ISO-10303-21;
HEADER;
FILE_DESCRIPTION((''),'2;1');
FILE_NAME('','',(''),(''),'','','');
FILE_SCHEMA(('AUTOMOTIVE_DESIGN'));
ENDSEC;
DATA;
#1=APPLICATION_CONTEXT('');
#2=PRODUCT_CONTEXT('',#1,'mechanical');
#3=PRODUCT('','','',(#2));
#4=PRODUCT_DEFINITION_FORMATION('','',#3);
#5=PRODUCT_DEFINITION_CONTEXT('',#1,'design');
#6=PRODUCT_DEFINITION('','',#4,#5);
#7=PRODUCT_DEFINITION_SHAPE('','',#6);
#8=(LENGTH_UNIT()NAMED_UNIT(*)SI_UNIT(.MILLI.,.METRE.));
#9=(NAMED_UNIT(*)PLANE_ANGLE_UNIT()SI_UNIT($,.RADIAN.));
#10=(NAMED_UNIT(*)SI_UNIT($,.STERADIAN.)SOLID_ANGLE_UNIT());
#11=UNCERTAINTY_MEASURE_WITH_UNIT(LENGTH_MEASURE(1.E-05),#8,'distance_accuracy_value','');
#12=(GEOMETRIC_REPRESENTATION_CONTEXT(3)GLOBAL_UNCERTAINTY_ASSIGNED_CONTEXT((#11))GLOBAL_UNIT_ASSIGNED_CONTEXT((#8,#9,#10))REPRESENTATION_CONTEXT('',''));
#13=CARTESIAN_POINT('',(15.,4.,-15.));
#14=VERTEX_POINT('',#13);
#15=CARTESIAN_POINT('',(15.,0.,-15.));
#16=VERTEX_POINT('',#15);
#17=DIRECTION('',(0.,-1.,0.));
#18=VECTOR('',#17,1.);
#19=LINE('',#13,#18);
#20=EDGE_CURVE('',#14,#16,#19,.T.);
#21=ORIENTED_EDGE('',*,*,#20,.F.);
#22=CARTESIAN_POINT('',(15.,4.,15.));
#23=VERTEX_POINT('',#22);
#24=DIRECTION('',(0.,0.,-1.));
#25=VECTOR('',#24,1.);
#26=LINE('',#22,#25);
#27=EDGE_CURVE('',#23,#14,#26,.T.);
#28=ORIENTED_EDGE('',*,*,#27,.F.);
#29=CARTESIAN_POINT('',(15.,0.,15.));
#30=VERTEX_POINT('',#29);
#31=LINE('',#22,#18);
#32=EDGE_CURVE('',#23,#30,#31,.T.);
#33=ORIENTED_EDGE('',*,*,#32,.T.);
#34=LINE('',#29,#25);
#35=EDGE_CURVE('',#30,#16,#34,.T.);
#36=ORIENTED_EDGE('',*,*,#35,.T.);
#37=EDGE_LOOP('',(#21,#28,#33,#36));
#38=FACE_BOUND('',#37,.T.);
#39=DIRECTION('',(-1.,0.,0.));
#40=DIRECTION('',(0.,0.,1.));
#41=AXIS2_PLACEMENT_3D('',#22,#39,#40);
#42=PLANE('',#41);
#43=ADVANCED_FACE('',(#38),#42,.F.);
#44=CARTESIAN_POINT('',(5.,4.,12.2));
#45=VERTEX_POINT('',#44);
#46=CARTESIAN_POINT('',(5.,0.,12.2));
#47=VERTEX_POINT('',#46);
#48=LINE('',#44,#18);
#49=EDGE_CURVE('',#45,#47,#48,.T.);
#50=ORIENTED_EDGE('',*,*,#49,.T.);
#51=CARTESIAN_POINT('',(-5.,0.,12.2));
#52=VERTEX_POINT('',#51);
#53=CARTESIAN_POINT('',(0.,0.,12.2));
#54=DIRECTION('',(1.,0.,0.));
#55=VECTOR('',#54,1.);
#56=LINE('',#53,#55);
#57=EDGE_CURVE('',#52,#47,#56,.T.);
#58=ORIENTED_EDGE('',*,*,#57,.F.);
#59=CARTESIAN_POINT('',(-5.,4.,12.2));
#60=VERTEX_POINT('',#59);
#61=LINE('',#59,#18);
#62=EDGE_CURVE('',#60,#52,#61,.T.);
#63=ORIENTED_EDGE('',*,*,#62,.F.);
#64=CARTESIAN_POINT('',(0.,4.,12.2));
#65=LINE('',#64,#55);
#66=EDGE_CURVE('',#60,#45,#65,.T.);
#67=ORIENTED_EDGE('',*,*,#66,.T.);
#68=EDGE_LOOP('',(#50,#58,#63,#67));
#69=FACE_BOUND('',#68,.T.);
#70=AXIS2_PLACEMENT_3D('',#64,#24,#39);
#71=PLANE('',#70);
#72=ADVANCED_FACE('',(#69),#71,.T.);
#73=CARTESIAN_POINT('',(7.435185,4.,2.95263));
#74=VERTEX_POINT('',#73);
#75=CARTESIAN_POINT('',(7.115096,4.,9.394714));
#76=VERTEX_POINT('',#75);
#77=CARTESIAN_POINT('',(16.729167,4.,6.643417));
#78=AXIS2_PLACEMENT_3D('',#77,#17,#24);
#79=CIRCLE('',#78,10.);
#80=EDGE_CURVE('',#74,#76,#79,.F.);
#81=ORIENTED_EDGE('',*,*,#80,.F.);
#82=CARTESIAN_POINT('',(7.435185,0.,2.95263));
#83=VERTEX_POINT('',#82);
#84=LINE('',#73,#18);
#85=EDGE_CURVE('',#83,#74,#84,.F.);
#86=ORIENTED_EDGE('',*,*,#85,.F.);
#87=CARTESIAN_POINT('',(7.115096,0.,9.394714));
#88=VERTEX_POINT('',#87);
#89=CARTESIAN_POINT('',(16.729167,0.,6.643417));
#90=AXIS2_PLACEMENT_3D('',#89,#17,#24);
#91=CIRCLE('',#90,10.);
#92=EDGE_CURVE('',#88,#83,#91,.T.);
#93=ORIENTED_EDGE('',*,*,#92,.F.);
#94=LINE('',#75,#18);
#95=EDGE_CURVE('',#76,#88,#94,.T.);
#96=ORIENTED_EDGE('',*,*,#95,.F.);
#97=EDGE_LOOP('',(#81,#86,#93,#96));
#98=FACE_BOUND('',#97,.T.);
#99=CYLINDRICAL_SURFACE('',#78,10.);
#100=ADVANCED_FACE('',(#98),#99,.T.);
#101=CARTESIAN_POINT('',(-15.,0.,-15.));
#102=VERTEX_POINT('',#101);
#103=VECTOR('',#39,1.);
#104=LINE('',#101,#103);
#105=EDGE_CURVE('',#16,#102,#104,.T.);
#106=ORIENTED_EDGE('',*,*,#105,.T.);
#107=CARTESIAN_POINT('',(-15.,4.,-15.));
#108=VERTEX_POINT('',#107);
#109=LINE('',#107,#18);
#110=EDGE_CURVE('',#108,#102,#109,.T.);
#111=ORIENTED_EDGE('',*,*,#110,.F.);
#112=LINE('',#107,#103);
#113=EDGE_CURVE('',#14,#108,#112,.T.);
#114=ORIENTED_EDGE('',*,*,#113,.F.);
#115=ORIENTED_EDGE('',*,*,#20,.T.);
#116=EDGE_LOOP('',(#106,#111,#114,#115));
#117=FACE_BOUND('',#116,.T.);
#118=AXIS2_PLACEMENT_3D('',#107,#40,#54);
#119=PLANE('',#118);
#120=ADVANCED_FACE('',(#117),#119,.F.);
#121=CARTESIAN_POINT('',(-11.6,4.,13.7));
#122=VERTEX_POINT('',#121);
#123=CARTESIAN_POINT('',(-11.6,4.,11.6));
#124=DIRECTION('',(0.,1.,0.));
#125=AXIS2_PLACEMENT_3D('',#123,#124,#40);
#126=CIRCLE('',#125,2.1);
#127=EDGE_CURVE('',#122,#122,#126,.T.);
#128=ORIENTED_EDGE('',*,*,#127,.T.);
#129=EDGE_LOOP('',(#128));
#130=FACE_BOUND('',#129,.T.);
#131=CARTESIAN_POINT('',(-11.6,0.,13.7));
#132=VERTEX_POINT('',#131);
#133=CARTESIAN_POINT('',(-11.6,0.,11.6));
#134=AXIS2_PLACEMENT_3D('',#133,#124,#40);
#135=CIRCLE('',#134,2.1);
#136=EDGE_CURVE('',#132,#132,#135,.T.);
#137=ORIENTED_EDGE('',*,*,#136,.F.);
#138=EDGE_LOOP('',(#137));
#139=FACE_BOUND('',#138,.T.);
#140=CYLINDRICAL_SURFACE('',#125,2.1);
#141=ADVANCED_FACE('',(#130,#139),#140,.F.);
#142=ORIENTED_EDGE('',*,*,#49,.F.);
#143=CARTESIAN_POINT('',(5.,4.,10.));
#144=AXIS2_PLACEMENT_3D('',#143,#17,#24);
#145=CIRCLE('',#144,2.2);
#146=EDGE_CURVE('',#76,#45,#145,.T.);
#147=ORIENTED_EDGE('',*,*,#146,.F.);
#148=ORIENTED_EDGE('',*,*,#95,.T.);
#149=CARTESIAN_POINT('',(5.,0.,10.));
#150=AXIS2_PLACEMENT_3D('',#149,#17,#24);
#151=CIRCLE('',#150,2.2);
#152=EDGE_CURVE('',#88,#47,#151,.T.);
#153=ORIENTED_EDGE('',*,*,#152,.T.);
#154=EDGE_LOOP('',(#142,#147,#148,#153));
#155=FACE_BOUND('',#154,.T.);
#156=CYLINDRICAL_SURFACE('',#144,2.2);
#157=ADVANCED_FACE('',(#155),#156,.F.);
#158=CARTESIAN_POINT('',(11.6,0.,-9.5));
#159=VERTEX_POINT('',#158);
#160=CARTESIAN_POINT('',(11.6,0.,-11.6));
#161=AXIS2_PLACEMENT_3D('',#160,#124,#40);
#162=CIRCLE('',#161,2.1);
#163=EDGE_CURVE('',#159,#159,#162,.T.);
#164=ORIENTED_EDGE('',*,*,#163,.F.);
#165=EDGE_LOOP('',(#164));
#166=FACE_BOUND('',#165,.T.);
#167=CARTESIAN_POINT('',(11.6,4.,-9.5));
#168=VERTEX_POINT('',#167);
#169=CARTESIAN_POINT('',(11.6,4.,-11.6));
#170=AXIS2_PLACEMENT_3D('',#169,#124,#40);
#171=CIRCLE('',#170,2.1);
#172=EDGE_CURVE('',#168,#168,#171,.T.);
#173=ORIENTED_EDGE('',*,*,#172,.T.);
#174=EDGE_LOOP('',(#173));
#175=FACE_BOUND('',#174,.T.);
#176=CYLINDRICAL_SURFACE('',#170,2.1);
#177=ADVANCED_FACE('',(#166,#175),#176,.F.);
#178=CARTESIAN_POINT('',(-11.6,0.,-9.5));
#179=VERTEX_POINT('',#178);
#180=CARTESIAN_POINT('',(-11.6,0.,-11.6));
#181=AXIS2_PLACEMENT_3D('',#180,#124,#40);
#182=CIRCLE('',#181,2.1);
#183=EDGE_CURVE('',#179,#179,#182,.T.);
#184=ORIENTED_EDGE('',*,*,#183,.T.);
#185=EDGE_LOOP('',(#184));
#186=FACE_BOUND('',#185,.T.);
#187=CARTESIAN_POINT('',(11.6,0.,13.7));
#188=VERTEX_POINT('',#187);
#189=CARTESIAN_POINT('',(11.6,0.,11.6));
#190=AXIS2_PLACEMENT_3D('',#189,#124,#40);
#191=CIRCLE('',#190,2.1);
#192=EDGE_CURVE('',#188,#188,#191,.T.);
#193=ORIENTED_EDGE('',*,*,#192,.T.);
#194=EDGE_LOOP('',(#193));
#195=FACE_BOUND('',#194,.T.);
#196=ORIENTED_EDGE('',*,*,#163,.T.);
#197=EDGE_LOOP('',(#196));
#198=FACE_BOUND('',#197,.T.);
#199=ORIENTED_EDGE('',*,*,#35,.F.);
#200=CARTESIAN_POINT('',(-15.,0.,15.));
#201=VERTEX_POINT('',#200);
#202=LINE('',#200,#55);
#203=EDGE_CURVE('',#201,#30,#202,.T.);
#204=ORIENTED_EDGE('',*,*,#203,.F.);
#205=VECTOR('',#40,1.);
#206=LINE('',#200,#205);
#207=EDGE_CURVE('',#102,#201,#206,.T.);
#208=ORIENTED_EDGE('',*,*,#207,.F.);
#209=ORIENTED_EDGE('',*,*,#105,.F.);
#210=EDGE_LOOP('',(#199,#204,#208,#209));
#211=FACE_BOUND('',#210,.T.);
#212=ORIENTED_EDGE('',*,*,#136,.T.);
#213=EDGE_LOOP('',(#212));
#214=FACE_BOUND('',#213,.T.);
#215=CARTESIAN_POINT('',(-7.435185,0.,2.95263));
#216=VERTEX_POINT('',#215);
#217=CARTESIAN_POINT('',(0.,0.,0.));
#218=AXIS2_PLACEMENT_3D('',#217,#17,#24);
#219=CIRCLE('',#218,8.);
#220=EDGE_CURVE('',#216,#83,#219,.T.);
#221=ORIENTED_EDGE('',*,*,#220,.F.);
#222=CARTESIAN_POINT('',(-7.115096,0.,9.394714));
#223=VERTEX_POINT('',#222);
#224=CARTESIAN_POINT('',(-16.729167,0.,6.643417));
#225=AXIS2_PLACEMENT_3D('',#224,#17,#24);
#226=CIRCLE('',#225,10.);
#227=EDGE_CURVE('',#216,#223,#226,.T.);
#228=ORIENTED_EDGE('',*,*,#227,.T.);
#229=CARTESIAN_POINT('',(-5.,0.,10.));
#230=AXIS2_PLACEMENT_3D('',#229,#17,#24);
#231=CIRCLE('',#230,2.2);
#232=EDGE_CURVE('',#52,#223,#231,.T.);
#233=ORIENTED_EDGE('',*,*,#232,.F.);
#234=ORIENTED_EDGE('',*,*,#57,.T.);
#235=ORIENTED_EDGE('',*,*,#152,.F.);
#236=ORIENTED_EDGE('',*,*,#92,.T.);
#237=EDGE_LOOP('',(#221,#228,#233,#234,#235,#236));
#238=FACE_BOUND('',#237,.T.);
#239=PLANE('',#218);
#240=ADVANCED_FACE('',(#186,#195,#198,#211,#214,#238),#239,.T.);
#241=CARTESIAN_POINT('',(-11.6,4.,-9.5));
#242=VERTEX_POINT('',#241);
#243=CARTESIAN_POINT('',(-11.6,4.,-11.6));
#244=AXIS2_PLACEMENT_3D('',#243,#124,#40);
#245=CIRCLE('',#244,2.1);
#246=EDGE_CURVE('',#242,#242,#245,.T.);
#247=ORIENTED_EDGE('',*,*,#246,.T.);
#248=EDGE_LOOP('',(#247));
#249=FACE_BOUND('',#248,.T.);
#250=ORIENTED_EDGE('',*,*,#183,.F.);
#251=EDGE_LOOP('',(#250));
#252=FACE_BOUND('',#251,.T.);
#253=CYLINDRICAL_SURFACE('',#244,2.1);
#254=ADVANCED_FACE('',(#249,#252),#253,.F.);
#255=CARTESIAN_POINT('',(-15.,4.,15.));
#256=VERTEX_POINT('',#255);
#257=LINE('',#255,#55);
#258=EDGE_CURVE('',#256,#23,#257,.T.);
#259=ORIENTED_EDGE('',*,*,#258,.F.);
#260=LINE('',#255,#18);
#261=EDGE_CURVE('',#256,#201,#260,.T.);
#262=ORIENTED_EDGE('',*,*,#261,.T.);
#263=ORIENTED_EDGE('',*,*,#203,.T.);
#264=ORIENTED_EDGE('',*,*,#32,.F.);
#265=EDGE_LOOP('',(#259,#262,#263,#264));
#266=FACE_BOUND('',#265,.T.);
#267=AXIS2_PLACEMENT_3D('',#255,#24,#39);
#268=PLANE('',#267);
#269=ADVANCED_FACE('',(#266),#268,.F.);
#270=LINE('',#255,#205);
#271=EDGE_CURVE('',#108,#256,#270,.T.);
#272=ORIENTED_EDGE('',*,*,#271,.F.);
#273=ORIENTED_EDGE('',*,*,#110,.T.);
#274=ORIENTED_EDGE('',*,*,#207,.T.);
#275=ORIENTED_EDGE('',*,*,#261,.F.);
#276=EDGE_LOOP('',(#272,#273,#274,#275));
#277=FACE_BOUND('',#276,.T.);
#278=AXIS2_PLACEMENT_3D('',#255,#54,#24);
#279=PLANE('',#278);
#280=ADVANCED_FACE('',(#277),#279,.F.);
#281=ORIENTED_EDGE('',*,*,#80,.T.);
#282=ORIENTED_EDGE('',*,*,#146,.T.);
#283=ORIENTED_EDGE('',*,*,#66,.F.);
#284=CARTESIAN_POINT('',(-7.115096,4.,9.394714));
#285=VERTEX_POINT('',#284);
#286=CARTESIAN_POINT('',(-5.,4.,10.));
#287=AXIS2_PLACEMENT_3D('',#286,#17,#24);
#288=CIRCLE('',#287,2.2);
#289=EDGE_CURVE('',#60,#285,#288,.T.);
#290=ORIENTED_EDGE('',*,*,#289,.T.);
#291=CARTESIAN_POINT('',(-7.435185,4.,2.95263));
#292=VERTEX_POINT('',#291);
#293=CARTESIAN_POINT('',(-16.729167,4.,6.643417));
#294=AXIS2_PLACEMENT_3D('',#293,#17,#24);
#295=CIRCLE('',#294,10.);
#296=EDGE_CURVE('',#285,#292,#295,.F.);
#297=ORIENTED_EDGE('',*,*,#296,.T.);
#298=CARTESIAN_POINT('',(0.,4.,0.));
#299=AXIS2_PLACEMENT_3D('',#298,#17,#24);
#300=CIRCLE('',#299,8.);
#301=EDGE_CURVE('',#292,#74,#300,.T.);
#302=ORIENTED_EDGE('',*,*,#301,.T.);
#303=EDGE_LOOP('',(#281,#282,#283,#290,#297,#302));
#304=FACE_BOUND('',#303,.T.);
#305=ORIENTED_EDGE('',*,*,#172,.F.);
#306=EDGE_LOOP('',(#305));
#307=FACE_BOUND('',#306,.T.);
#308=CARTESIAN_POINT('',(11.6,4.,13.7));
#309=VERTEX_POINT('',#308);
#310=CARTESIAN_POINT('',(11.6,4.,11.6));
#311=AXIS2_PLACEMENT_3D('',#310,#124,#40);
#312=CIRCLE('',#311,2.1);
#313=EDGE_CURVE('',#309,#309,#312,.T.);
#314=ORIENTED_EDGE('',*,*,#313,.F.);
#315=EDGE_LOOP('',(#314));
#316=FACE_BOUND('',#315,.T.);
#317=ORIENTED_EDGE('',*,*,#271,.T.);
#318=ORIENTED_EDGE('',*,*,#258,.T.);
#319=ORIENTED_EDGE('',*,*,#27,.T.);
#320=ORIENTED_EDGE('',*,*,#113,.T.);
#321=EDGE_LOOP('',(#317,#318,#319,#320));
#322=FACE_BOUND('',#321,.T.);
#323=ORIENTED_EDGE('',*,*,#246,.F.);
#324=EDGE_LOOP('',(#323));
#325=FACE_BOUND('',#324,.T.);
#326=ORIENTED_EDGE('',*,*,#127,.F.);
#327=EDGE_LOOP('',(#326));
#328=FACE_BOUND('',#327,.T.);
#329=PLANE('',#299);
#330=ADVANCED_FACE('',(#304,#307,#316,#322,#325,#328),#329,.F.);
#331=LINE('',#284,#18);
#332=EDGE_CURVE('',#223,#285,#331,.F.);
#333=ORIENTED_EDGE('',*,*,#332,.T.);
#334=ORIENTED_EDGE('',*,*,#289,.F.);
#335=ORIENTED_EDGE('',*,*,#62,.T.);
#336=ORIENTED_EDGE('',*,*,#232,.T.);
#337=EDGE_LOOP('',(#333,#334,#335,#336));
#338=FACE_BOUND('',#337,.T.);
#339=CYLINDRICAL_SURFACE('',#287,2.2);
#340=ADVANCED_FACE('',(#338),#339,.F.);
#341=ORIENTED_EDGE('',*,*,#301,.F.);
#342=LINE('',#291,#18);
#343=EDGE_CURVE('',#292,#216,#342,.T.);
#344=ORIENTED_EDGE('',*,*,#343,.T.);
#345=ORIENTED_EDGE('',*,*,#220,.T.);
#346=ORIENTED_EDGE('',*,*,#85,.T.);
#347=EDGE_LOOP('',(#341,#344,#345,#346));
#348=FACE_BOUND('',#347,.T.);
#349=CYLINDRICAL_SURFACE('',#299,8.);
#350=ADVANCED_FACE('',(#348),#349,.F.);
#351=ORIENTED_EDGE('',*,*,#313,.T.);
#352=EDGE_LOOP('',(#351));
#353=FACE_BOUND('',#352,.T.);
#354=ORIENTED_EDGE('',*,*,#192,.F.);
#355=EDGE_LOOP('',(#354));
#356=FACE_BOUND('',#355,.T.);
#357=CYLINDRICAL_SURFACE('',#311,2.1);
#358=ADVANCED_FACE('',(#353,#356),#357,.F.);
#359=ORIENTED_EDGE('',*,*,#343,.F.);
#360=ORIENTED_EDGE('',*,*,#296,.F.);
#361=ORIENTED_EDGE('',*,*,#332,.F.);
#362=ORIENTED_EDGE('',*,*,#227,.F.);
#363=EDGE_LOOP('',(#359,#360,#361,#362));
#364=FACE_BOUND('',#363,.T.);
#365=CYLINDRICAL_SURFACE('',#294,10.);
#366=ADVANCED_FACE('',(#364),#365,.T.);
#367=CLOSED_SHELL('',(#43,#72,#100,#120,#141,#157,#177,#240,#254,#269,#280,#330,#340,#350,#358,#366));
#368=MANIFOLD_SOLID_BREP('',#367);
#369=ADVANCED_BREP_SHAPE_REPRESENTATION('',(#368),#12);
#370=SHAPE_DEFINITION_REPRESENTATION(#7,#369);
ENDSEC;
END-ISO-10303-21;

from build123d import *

# Parameters (mm, degrees)
SKETCH1_W                          = 30
SKETCH1_H                          = 30
BOSS_EXTRUDE1_DEPTH                = 4
F_4_2_4_2_DIAMETER_HOLE1_OUTLINE_R = 2.1
F_4_2_4_2_DIAMETER_HOLE1_DEPTH     = 4
SKETCH7_R                          = 8
CUT_EXTRUDE1_DEPTH                 = 22.587033145
FILLET1_R                          = 10


# Read off the part's stored shape, not the designer's step: Ø4.2 (4.2) Diameter Hole1
with BuildPart() as part:
    # Sketch1 → Boss-Extrude1 (new body)
    with BuildSketch(Plane(origin=(0, 0, 0), x_dir=(1, 0, 0), z_dir=(0, 1, 0))):
        Rectangle(SKETCH1_W, SKETCH1_H)
    extrude(amount=BOSS_EXTRUDE1_DEPTH)

    # Ø4.2 (4.2) Diameter Hole1 outline → Ø4.2 (4.2) Diameter Hole1 (cut)
    with BuildSketch(Plane(origin=(0, 0, 0), x_dir=(1, 0, 0), z_dir=(0, 1, 0))):
        with Locations((11.6, -11.6)):
            Circle(F_4_2_4_2_DIAMETER_HOLE1_OUTLINE_R)
        with Locations((-11.6, 11.6)):
            Circle(F_4_2_4_2_DIAMETER_HOLE1_OUTLINE_R)
        with Locations((-11.6, -11.6)):
            Circle(F_4_2_4_2_DIAMETER_HOLE1_OUTLINE_R)
        with Locations((11.6, 11.6)):
            Circle(F_4_2_4_2_DIAMETER_HOLE1_OUTLINE_R)
    extrude(amount=F_4_2_4_2_DIAMETER_HOLE1_DEPTH, mode=Mode.SUBTRACT)

    # Sketch7 → Cut-Extrude1 (cut, through all)
    with BuildSketch(Plane.XZ):
        with BuildLine():
            ThreePointArc((1.777638883, 7.8), (0, 8), (-1.777638883, 7.8))
            Line((-1.777638883, 7.8), (1.777638883, 7.8))
        make_face()
        with BuildLine():
            Line((1.777638883, 7.8), (-1.777638883, 7.8))
            ThreePointArc((-1.777638883, 7.8), (-4.988932197, -6.253843261), (8, 0))
            ThreePointArc((8, 0), (6.253843261, 4.988932197), (1.777638883, 7.8))
        make_face()
        Circle(SKETCH7_R)
        with BuildLine():
            Line((-5, 7.8), (5, 7.8))
            ThreePointArc((5, 7.8), (7.2, 10), (5, 12.2))
            Line((5, 12.2), (-5, 12.2))
            ThreePointArc((-5, 12.2), (-7.2, 10), (-5, 7.8))
        make_face()
    extrude(amount=-CUT_EXTRUDE1_DEPTH, mode=Mode.SUBTRACT)

    # Fillet1
    fillet1_edges = [part.edges().sort_by_distance(p)[0] for p in [
        (1.777638883, 2, 7.8),
        (-1.777638883, 2, 7.8),
    ]]
    fillet(fillet1_edges, radius=FILLET1_R)


solid = part.part
